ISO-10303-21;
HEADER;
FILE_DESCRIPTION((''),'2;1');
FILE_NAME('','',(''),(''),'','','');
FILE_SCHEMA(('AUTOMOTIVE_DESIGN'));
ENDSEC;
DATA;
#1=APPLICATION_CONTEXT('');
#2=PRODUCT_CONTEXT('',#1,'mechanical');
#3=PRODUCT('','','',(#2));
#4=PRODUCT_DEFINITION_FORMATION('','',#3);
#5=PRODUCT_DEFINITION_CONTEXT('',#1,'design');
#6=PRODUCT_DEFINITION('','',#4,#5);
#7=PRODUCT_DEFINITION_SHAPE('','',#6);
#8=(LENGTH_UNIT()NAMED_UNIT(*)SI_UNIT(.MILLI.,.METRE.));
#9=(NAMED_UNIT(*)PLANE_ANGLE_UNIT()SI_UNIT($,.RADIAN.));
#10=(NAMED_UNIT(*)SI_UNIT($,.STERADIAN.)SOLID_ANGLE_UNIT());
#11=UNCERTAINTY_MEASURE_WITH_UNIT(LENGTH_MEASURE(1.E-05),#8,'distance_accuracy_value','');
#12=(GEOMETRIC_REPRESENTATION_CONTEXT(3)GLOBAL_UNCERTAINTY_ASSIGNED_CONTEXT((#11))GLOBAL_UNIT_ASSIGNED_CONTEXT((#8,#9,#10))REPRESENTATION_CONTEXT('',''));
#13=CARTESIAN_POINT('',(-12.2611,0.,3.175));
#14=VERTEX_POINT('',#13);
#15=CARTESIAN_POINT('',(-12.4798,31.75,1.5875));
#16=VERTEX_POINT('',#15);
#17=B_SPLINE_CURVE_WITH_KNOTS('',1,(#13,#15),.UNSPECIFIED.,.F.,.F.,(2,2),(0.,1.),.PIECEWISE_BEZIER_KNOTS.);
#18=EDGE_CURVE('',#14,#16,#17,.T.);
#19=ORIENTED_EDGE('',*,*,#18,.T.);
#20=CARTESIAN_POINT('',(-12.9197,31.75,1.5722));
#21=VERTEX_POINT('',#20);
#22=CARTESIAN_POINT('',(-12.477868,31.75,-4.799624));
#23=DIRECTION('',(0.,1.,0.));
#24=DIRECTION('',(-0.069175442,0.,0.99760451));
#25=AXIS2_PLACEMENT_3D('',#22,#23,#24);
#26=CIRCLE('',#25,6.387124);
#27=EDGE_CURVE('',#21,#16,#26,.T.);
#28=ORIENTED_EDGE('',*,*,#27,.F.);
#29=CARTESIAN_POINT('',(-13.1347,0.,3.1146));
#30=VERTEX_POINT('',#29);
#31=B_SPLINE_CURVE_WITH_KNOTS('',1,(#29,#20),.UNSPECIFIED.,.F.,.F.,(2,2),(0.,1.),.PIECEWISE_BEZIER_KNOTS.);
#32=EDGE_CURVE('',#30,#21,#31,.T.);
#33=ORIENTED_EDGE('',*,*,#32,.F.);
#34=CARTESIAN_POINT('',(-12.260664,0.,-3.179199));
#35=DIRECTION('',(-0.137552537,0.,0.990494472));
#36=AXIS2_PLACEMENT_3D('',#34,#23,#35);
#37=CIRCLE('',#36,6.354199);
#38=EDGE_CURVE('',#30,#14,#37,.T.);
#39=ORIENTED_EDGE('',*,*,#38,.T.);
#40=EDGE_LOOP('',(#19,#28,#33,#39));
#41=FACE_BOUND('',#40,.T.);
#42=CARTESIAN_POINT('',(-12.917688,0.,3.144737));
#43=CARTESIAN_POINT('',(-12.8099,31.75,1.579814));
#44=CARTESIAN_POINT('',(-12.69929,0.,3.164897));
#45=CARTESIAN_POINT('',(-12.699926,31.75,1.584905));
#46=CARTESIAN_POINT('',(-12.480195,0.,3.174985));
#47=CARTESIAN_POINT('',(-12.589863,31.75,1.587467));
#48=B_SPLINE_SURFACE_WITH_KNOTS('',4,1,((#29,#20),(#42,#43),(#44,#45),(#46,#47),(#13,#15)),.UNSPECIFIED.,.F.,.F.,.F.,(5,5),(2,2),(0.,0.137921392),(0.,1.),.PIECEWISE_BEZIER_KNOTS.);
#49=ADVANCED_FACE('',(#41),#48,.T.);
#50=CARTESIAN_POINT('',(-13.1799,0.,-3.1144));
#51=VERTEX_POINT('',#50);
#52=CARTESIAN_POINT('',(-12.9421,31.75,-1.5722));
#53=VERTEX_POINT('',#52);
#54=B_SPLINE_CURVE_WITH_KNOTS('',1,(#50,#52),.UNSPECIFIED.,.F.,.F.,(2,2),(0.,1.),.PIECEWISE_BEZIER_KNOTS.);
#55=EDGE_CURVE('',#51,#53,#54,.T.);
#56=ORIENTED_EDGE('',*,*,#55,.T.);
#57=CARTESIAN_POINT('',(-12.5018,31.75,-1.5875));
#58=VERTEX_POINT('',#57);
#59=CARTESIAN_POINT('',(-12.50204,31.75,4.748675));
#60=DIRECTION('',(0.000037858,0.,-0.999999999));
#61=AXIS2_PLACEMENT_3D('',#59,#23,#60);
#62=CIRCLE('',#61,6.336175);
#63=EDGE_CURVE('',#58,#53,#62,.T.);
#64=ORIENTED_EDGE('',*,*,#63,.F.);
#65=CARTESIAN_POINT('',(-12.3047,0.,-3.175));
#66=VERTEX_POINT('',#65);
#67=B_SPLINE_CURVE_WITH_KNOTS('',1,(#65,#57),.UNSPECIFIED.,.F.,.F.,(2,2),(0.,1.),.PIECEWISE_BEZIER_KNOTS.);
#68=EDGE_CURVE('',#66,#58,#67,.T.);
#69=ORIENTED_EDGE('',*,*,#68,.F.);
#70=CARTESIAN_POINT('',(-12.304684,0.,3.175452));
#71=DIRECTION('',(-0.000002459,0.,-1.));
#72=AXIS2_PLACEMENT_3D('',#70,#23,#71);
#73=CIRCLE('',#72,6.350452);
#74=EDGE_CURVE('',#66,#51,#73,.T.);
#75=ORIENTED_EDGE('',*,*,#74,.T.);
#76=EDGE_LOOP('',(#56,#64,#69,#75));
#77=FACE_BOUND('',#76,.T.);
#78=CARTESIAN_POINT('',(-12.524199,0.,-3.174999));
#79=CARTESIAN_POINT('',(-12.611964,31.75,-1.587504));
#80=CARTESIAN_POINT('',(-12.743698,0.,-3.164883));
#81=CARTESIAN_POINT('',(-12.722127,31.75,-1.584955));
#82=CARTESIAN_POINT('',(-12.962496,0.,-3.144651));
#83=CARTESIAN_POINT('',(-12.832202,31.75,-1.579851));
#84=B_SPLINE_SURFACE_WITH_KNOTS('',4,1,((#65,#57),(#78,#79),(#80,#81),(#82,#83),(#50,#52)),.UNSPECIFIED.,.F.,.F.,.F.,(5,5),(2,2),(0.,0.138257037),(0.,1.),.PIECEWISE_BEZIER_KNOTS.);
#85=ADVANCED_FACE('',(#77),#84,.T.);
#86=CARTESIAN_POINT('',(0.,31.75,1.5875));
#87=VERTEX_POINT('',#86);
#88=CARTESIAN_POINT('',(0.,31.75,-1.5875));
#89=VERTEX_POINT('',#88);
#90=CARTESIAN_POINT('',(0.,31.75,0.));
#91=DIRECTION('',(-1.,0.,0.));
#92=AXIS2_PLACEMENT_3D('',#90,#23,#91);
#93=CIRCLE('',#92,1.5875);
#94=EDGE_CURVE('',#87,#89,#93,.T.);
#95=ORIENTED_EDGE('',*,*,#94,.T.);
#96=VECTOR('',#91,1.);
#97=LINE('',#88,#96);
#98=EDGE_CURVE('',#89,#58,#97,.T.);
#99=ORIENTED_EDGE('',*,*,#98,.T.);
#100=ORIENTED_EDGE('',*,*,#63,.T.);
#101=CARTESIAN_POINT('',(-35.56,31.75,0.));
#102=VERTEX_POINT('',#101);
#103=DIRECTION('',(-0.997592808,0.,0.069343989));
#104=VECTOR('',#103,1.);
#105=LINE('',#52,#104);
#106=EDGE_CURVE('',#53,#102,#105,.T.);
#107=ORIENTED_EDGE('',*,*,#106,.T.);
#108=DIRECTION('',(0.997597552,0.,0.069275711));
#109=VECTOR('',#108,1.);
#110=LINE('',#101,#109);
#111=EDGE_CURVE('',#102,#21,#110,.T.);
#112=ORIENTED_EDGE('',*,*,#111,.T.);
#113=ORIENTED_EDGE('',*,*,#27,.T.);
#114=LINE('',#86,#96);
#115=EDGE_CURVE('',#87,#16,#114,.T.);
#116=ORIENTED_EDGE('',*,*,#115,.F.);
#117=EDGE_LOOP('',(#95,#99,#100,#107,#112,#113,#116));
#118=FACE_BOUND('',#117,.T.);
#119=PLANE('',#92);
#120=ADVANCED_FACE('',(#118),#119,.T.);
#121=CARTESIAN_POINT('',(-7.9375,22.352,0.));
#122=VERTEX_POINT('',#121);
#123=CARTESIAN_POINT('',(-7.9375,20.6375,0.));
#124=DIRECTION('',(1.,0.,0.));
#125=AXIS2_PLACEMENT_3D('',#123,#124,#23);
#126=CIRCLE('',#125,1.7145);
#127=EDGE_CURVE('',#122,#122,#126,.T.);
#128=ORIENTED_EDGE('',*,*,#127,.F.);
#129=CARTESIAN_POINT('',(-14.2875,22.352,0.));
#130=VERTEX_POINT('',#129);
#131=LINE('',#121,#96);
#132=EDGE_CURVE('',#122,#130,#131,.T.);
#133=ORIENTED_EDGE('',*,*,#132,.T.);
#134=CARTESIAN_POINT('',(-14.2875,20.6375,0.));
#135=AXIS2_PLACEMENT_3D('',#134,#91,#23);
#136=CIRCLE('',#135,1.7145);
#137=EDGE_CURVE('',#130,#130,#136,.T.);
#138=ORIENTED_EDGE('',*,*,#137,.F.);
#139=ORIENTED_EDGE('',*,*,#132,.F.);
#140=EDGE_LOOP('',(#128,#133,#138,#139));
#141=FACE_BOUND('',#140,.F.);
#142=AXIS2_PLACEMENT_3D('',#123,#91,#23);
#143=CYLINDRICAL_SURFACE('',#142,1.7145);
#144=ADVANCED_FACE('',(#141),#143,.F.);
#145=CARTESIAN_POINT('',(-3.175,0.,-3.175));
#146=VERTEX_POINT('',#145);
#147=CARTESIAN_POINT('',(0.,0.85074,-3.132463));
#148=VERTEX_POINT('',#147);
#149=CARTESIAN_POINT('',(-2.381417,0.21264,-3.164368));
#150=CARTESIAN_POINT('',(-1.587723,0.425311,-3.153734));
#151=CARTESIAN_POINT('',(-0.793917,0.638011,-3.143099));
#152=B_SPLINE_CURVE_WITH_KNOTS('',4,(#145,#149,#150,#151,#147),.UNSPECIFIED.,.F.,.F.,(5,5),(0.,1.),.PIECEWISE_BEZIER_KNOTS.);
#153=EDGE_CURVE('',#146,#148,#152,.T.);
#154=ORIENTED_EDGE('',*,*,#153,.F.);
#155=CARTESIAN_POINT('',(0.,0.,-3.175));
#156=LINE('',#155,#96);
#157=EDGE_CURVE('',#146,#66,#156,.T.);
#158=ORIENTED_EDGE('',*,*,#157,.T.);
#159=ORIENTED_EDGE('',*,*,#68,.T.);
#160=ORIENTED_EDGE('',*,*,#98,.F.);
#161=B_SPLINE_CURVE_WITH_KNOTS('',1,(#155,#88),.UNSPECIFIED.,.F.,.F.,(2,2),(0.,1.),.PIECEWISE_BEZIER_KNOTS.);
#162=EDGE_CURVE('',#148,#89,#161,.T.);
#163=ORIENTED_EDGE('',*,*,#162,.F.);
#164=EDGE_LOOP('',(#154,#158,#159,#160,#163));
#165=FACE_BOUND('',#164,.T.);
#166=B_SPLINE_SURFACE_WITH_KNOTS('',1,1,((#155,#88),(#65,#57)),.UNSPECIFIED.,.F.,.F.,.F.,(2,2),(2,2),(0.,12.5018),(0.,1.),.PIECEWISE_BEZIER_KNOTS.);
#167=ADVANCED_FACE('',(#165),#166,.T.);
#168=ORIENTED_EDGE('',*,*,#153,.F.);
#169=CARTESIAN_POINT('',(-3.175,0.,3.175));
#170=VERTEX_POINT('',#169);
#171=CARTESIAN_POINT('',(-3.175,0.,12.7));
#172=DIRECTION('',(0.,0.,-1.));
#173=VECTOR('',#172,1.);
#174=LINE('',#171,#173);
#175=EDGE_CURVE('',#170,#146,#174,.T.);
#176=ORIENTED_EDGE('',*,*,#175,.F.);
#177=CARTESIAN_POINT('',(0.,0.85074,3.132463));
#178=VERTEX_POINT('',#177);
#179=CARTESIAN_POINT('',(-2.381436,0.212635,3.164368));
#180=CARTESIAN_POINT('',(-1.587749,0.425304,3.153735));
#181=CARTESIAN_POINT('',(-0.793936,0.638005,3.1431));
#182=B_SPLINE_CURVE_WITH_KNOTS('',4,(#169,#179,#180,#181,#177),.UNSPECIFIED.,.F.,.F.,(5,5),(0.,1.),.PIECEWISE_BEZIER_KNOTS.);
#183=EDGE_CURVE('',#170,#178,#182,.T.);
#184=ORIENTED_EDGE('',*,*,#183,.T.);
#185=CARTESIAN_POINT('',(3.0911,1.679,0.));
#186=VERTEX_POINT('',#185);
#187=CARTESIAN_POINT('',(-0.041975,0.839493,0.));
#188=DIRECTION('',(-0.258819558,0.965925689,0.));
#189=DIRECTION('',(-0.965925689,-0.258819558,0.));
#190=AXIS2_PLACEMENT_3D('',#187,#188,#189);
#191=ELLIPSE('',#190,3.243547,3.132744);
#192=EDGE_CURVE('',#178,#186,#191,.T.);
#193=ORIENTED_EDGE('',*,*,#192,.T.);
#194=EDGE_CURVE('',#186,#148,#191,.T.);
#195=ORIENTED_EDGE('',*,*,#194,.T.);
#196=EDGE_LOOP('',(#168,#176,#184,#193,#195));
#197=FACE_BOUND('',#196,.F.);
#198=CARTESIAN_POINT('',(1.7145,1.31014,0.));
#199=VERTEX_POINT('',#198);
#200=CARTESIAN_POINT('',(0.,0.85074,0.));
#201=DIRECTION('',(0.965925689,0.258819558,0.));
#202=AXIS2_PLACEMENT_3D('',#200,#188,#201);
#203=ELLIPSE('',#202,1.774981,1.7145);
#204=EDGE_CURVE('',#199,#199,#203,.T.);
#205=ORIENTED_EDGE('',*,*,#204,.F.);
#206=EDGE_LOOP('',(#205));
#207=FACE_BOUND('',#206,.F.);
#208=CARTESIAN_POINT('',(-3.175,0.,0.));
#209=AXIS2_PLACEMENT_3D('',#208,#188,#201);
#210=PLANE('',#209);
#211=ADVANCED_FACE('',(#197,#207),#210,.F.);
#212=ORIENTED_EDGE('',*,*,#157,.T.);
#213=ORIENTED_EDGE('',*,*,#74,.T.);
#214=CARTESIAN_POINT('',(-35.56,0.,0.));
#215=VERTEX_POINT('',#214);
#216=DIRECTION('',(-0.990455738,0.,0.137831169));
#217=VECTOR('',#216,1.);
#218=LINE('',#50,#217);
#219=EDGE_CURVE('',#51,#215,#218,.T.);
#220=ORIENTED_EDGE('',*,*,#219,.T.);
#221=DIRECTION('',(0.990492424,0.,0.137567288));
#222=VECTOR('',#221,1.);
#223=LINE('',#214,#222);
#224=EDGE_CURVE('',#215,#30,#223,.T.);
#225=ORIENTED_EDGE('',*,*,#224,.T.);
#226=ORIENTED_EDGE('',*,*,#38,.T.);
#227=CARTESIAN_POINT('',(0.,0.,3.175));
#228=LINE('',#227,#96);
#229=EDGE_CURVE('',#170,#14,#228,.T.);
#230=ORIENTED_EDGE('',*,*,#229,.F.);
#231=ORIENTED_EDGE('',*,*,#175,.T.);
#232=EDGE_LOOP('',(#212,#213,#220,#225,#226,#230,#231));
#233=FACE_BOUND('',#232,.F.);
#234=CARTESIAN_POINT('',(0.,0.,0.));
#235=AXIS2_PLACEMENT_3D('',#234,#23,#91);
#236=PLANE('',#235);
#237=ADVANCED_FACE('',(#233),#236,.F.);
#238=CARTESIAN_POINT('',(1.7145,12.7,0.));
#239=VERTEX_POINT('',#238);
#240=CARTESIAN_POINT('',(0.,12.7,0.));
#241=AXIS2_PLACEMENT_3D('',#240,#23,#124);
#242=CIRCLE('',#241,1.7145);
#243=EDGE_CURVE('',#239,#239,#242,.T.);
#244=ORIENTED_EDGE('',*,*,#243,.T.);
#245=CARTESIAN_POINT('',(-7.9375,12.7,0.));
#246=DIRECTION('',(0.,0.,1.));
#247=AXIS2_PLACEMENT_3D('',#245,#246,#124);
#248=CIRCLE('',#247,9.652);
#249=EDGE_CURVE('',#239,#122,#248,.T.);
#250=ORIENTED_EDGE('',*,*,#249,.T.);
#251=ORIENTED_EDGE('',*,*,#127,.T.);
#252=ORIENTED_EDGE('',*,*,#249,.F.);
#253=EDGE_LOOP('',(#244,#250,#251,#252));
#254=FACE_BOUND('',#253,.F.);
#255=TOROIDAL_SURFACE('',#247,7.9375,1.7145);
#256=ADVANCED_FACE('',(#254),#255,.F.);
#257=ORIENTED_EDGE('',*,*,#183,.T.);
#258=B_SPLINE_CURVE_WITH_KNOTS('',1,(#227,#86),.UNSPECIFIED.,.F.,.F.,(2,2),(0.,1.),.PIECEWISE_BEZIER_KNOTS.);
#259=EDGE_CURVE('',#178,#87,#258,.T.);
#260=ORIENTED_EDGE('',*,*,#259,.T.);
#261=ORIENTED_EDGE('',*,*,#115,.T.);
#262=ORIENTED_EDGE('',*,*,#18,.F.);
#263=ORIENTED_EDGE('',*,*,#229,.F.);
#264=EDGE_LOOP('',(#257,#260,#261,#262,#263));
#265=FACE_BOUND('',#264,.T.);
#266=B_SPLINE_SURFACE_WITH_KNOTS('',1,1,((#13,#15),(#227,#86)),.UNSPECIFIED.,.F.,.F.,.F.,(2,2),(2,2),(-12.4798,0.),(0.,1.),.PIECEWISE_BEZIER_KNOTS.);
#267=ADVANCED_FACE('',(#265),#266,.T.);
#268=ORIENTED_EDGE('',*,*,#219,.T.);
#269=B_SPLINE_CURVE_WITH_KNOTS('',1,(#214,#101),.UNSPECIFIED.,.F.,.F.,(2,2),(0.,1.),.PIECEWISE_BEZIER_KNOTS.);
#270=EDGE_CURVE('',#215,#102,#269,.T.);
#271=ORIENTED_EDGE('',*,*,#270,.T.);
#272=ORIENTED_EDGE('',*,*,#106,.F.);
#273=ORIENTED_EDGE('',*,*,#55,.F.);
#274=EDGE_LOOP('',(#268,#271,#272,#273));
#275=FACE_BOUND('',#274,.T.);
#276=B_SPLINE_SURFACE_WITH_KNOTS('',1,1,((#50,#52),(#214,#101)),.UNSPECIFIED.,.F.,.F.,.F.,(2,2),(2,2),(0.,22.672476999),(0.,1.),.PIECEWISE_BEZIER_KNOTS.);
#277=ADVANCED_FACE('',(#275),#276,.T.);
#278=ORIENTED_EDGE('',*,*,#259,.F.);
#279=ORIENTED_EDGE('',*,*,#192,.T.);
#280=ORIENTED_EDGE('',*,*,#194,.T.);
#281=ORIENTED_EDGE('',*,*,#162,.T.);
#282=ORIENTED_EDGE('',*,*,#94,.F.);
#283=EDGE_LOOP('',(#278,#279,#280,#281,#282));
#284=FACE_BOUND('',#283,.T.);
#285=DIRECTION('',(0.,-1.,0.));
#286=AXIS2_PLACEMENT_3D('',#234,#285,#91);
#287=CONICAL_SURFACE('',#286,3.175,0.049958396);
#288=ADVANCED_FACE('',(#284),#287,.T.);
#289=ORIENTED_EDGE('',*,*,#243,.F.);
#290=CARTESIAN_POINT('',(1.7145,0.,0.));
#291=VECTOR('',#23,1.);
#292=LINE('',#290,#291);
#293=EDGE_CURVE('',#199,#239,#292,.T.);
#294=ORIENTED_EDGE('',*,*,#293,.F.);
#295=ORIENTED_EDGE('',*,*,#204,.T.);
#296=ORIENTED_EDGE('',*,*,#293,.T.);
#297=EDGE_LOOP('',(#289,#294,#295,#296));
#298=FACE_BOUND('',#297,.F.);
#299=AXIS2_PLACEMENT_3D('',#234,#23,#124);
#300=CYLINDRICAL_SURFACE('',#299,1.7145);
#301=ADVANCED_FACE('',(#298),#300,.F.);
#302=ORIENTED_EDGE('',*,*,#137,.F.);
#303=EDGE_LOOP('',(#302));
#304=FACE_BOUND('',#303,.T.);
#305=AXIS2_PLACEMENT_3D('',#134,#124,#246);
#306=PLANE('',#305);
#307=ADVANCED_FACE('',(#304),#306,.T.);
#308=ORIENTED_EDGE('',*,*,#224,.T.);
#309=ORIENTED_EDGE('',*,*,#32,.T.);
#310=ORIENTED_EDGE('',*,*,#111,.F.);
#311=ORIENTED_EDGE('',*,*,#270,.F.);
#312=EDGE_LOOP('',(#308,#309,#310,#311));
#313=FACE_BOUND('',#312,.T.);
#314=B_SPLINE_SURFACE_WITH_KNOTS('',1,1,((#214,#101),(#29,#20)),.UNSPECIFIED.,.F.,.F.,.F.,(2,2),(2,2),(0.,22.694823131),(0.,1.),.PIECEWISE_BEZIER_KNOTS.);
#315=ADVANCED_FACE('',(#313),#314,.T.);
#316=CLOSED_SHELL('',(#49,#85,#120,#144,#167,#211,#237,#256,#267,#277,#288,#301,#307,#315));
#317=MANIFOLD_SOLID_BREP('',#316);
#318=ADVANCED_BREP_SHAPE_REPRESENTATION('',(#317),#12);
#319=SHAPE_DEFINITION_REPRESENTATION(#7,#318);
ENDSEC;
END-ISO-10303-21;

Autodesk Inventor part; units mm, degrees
ref_plane "YZ Plane" through (0, 0, 0) normal (1, 0, 0) x (0, 1, 0)
ref_plane "XY Plane" through (0, 0, 0) normal (0, 0, 1) x (1, 0, 0)
sketch "Sketch2" plane through (0, 0, 0) normal (0, 1, 0) x (-1, 0, 0)
  circle A0 centre (0, 0) radius 3.175
  line L0 (0, 0) -> (35.56, 0)
  line L1 (0, 3.175) -> (12.2611, 3.175)
  line L2 (0, -3.175) -> (12.3047, -3.175)
  line L3 (13.1799, -3.1144) -> (35.56, 0)
  line L4 (35.56, 0) -> (13.1347, 3.1146)
  arc A1 (13.1347, 3.1146) -> (12.2611, 3.175) centre (12.2611, -3.175) ccw
  arc A2 (12.3047, -3.175) -> (13.1799, -3.1144) centre (12.3047, 3.175) ccw
  circle A3 centre (0, 0) radius 1.5875
  point P0 (12.7, 3.175)
  dimension "d5" = 6.35
  dimension "d6" = 35.56
  dimension "d7" = 12.7
  dimension "d8" = 6.35
  dimension "d9" = 6.35
  dimension "d12" = 3.175
ref_plane "Work Plane1" through (0, 31.75, 0) normal (0, 1, 0) x (-1, 0, 0)
sketch "Sketch3" plane through (0, 31.75, 0) normal (0, 1, 0) x (-1, 0, 0)
  circle A0 centre (0, 0) radius 1.5875
  line L0 (0, 1.5875) -> (12.4798, 1.5875)
  line L1 (0, -1.5875) -> (12.5018, -1.5875)
  line L2 (12.9421, -1.5722) -> (35.56, 0)
  line L3 (35.56, 0) -> (12.9197, 1.5722)
  arc A1 (12.9197, 1.5722) -> (12.4798, 1.5875) centre (12.4798, -4.7625) ccw
  arc A2 (12.5018, -1.5875) -> (12.9421, -1.5722) centre (12.5018, 4.7625) ccw
  point P0 (12.7, 1.5875)
  dimension "d14" = 3.175
  dimension "d15" = 12.7
  dimension "d16" = 6.35
  dimension "d17" = 6.35
loft "Loft1" add profiles "Sketch2", "Sketch3" contours A0 | L0 L3 A2 L2 A0 | A0 L1 A1 L4 L0 | A3 / all
sketch "Sketch4" plane through (0, 0, 0) normal (0, 0, 1) x (1, 0, 0)
  line L0 (-12.2611, 0) -> (0, 0) projected
  line L1 (0, 0) -> (0, 12.7)
  line L2 (0, 0) -> (0, 31.75) projected
  line L3 (0, 12.7) -> (-7.9375, 12.7)
  line L4 (-7.9375, 12.7) -> (-7.9375, 20.6375)
  arc A0 (0, 12.7) -> (-7.9375, 20.6375) centre (-7.9375, 12.7) ccw
  line L5 (-7.9375, 20.6375) -> (-14.2875, 20.6375)
  dimension "d22" = 12.7
  dimension "d23" = 7.9375
  dimension "d24" = 7.9375
  dimension "d25" = 6.35
sketch "Sketch5" plane through (-12.3047, 0, -3.175) normal (0, -1, 0) x (1, 0, 0)
  circle A0 centre (12.3047, 3.175) radius 1.7145
  dimension "d26" = 3.429
sweep "Sweep1" cut profiles "Sketch5" path "Sketch4" path curves L1 A0 L5
sketch "Sketch6" plane through (0, 0, 0) normal (0, 0, 1) x (1, 0, 0)
  line L0 (3.175, 0) -> (0, 0) projected
  line L1 (3.175, 0) -> (-3.175, 0)
  line L2 (0, 0) -> (-12.3047, 0) projected
  line L3 (-3.175, 0) -> (3.0911, 1.679)
  line L4 (3.175, 0) -> (1.5875, 31.75) projected
  dimension "d29" = 6.35
  dimension "d30" = 15
extrude "Extrusion3" cut sketch "Sketch6" along normal mid plane 25.4
properties part number "RudderLowerControlSurface"
